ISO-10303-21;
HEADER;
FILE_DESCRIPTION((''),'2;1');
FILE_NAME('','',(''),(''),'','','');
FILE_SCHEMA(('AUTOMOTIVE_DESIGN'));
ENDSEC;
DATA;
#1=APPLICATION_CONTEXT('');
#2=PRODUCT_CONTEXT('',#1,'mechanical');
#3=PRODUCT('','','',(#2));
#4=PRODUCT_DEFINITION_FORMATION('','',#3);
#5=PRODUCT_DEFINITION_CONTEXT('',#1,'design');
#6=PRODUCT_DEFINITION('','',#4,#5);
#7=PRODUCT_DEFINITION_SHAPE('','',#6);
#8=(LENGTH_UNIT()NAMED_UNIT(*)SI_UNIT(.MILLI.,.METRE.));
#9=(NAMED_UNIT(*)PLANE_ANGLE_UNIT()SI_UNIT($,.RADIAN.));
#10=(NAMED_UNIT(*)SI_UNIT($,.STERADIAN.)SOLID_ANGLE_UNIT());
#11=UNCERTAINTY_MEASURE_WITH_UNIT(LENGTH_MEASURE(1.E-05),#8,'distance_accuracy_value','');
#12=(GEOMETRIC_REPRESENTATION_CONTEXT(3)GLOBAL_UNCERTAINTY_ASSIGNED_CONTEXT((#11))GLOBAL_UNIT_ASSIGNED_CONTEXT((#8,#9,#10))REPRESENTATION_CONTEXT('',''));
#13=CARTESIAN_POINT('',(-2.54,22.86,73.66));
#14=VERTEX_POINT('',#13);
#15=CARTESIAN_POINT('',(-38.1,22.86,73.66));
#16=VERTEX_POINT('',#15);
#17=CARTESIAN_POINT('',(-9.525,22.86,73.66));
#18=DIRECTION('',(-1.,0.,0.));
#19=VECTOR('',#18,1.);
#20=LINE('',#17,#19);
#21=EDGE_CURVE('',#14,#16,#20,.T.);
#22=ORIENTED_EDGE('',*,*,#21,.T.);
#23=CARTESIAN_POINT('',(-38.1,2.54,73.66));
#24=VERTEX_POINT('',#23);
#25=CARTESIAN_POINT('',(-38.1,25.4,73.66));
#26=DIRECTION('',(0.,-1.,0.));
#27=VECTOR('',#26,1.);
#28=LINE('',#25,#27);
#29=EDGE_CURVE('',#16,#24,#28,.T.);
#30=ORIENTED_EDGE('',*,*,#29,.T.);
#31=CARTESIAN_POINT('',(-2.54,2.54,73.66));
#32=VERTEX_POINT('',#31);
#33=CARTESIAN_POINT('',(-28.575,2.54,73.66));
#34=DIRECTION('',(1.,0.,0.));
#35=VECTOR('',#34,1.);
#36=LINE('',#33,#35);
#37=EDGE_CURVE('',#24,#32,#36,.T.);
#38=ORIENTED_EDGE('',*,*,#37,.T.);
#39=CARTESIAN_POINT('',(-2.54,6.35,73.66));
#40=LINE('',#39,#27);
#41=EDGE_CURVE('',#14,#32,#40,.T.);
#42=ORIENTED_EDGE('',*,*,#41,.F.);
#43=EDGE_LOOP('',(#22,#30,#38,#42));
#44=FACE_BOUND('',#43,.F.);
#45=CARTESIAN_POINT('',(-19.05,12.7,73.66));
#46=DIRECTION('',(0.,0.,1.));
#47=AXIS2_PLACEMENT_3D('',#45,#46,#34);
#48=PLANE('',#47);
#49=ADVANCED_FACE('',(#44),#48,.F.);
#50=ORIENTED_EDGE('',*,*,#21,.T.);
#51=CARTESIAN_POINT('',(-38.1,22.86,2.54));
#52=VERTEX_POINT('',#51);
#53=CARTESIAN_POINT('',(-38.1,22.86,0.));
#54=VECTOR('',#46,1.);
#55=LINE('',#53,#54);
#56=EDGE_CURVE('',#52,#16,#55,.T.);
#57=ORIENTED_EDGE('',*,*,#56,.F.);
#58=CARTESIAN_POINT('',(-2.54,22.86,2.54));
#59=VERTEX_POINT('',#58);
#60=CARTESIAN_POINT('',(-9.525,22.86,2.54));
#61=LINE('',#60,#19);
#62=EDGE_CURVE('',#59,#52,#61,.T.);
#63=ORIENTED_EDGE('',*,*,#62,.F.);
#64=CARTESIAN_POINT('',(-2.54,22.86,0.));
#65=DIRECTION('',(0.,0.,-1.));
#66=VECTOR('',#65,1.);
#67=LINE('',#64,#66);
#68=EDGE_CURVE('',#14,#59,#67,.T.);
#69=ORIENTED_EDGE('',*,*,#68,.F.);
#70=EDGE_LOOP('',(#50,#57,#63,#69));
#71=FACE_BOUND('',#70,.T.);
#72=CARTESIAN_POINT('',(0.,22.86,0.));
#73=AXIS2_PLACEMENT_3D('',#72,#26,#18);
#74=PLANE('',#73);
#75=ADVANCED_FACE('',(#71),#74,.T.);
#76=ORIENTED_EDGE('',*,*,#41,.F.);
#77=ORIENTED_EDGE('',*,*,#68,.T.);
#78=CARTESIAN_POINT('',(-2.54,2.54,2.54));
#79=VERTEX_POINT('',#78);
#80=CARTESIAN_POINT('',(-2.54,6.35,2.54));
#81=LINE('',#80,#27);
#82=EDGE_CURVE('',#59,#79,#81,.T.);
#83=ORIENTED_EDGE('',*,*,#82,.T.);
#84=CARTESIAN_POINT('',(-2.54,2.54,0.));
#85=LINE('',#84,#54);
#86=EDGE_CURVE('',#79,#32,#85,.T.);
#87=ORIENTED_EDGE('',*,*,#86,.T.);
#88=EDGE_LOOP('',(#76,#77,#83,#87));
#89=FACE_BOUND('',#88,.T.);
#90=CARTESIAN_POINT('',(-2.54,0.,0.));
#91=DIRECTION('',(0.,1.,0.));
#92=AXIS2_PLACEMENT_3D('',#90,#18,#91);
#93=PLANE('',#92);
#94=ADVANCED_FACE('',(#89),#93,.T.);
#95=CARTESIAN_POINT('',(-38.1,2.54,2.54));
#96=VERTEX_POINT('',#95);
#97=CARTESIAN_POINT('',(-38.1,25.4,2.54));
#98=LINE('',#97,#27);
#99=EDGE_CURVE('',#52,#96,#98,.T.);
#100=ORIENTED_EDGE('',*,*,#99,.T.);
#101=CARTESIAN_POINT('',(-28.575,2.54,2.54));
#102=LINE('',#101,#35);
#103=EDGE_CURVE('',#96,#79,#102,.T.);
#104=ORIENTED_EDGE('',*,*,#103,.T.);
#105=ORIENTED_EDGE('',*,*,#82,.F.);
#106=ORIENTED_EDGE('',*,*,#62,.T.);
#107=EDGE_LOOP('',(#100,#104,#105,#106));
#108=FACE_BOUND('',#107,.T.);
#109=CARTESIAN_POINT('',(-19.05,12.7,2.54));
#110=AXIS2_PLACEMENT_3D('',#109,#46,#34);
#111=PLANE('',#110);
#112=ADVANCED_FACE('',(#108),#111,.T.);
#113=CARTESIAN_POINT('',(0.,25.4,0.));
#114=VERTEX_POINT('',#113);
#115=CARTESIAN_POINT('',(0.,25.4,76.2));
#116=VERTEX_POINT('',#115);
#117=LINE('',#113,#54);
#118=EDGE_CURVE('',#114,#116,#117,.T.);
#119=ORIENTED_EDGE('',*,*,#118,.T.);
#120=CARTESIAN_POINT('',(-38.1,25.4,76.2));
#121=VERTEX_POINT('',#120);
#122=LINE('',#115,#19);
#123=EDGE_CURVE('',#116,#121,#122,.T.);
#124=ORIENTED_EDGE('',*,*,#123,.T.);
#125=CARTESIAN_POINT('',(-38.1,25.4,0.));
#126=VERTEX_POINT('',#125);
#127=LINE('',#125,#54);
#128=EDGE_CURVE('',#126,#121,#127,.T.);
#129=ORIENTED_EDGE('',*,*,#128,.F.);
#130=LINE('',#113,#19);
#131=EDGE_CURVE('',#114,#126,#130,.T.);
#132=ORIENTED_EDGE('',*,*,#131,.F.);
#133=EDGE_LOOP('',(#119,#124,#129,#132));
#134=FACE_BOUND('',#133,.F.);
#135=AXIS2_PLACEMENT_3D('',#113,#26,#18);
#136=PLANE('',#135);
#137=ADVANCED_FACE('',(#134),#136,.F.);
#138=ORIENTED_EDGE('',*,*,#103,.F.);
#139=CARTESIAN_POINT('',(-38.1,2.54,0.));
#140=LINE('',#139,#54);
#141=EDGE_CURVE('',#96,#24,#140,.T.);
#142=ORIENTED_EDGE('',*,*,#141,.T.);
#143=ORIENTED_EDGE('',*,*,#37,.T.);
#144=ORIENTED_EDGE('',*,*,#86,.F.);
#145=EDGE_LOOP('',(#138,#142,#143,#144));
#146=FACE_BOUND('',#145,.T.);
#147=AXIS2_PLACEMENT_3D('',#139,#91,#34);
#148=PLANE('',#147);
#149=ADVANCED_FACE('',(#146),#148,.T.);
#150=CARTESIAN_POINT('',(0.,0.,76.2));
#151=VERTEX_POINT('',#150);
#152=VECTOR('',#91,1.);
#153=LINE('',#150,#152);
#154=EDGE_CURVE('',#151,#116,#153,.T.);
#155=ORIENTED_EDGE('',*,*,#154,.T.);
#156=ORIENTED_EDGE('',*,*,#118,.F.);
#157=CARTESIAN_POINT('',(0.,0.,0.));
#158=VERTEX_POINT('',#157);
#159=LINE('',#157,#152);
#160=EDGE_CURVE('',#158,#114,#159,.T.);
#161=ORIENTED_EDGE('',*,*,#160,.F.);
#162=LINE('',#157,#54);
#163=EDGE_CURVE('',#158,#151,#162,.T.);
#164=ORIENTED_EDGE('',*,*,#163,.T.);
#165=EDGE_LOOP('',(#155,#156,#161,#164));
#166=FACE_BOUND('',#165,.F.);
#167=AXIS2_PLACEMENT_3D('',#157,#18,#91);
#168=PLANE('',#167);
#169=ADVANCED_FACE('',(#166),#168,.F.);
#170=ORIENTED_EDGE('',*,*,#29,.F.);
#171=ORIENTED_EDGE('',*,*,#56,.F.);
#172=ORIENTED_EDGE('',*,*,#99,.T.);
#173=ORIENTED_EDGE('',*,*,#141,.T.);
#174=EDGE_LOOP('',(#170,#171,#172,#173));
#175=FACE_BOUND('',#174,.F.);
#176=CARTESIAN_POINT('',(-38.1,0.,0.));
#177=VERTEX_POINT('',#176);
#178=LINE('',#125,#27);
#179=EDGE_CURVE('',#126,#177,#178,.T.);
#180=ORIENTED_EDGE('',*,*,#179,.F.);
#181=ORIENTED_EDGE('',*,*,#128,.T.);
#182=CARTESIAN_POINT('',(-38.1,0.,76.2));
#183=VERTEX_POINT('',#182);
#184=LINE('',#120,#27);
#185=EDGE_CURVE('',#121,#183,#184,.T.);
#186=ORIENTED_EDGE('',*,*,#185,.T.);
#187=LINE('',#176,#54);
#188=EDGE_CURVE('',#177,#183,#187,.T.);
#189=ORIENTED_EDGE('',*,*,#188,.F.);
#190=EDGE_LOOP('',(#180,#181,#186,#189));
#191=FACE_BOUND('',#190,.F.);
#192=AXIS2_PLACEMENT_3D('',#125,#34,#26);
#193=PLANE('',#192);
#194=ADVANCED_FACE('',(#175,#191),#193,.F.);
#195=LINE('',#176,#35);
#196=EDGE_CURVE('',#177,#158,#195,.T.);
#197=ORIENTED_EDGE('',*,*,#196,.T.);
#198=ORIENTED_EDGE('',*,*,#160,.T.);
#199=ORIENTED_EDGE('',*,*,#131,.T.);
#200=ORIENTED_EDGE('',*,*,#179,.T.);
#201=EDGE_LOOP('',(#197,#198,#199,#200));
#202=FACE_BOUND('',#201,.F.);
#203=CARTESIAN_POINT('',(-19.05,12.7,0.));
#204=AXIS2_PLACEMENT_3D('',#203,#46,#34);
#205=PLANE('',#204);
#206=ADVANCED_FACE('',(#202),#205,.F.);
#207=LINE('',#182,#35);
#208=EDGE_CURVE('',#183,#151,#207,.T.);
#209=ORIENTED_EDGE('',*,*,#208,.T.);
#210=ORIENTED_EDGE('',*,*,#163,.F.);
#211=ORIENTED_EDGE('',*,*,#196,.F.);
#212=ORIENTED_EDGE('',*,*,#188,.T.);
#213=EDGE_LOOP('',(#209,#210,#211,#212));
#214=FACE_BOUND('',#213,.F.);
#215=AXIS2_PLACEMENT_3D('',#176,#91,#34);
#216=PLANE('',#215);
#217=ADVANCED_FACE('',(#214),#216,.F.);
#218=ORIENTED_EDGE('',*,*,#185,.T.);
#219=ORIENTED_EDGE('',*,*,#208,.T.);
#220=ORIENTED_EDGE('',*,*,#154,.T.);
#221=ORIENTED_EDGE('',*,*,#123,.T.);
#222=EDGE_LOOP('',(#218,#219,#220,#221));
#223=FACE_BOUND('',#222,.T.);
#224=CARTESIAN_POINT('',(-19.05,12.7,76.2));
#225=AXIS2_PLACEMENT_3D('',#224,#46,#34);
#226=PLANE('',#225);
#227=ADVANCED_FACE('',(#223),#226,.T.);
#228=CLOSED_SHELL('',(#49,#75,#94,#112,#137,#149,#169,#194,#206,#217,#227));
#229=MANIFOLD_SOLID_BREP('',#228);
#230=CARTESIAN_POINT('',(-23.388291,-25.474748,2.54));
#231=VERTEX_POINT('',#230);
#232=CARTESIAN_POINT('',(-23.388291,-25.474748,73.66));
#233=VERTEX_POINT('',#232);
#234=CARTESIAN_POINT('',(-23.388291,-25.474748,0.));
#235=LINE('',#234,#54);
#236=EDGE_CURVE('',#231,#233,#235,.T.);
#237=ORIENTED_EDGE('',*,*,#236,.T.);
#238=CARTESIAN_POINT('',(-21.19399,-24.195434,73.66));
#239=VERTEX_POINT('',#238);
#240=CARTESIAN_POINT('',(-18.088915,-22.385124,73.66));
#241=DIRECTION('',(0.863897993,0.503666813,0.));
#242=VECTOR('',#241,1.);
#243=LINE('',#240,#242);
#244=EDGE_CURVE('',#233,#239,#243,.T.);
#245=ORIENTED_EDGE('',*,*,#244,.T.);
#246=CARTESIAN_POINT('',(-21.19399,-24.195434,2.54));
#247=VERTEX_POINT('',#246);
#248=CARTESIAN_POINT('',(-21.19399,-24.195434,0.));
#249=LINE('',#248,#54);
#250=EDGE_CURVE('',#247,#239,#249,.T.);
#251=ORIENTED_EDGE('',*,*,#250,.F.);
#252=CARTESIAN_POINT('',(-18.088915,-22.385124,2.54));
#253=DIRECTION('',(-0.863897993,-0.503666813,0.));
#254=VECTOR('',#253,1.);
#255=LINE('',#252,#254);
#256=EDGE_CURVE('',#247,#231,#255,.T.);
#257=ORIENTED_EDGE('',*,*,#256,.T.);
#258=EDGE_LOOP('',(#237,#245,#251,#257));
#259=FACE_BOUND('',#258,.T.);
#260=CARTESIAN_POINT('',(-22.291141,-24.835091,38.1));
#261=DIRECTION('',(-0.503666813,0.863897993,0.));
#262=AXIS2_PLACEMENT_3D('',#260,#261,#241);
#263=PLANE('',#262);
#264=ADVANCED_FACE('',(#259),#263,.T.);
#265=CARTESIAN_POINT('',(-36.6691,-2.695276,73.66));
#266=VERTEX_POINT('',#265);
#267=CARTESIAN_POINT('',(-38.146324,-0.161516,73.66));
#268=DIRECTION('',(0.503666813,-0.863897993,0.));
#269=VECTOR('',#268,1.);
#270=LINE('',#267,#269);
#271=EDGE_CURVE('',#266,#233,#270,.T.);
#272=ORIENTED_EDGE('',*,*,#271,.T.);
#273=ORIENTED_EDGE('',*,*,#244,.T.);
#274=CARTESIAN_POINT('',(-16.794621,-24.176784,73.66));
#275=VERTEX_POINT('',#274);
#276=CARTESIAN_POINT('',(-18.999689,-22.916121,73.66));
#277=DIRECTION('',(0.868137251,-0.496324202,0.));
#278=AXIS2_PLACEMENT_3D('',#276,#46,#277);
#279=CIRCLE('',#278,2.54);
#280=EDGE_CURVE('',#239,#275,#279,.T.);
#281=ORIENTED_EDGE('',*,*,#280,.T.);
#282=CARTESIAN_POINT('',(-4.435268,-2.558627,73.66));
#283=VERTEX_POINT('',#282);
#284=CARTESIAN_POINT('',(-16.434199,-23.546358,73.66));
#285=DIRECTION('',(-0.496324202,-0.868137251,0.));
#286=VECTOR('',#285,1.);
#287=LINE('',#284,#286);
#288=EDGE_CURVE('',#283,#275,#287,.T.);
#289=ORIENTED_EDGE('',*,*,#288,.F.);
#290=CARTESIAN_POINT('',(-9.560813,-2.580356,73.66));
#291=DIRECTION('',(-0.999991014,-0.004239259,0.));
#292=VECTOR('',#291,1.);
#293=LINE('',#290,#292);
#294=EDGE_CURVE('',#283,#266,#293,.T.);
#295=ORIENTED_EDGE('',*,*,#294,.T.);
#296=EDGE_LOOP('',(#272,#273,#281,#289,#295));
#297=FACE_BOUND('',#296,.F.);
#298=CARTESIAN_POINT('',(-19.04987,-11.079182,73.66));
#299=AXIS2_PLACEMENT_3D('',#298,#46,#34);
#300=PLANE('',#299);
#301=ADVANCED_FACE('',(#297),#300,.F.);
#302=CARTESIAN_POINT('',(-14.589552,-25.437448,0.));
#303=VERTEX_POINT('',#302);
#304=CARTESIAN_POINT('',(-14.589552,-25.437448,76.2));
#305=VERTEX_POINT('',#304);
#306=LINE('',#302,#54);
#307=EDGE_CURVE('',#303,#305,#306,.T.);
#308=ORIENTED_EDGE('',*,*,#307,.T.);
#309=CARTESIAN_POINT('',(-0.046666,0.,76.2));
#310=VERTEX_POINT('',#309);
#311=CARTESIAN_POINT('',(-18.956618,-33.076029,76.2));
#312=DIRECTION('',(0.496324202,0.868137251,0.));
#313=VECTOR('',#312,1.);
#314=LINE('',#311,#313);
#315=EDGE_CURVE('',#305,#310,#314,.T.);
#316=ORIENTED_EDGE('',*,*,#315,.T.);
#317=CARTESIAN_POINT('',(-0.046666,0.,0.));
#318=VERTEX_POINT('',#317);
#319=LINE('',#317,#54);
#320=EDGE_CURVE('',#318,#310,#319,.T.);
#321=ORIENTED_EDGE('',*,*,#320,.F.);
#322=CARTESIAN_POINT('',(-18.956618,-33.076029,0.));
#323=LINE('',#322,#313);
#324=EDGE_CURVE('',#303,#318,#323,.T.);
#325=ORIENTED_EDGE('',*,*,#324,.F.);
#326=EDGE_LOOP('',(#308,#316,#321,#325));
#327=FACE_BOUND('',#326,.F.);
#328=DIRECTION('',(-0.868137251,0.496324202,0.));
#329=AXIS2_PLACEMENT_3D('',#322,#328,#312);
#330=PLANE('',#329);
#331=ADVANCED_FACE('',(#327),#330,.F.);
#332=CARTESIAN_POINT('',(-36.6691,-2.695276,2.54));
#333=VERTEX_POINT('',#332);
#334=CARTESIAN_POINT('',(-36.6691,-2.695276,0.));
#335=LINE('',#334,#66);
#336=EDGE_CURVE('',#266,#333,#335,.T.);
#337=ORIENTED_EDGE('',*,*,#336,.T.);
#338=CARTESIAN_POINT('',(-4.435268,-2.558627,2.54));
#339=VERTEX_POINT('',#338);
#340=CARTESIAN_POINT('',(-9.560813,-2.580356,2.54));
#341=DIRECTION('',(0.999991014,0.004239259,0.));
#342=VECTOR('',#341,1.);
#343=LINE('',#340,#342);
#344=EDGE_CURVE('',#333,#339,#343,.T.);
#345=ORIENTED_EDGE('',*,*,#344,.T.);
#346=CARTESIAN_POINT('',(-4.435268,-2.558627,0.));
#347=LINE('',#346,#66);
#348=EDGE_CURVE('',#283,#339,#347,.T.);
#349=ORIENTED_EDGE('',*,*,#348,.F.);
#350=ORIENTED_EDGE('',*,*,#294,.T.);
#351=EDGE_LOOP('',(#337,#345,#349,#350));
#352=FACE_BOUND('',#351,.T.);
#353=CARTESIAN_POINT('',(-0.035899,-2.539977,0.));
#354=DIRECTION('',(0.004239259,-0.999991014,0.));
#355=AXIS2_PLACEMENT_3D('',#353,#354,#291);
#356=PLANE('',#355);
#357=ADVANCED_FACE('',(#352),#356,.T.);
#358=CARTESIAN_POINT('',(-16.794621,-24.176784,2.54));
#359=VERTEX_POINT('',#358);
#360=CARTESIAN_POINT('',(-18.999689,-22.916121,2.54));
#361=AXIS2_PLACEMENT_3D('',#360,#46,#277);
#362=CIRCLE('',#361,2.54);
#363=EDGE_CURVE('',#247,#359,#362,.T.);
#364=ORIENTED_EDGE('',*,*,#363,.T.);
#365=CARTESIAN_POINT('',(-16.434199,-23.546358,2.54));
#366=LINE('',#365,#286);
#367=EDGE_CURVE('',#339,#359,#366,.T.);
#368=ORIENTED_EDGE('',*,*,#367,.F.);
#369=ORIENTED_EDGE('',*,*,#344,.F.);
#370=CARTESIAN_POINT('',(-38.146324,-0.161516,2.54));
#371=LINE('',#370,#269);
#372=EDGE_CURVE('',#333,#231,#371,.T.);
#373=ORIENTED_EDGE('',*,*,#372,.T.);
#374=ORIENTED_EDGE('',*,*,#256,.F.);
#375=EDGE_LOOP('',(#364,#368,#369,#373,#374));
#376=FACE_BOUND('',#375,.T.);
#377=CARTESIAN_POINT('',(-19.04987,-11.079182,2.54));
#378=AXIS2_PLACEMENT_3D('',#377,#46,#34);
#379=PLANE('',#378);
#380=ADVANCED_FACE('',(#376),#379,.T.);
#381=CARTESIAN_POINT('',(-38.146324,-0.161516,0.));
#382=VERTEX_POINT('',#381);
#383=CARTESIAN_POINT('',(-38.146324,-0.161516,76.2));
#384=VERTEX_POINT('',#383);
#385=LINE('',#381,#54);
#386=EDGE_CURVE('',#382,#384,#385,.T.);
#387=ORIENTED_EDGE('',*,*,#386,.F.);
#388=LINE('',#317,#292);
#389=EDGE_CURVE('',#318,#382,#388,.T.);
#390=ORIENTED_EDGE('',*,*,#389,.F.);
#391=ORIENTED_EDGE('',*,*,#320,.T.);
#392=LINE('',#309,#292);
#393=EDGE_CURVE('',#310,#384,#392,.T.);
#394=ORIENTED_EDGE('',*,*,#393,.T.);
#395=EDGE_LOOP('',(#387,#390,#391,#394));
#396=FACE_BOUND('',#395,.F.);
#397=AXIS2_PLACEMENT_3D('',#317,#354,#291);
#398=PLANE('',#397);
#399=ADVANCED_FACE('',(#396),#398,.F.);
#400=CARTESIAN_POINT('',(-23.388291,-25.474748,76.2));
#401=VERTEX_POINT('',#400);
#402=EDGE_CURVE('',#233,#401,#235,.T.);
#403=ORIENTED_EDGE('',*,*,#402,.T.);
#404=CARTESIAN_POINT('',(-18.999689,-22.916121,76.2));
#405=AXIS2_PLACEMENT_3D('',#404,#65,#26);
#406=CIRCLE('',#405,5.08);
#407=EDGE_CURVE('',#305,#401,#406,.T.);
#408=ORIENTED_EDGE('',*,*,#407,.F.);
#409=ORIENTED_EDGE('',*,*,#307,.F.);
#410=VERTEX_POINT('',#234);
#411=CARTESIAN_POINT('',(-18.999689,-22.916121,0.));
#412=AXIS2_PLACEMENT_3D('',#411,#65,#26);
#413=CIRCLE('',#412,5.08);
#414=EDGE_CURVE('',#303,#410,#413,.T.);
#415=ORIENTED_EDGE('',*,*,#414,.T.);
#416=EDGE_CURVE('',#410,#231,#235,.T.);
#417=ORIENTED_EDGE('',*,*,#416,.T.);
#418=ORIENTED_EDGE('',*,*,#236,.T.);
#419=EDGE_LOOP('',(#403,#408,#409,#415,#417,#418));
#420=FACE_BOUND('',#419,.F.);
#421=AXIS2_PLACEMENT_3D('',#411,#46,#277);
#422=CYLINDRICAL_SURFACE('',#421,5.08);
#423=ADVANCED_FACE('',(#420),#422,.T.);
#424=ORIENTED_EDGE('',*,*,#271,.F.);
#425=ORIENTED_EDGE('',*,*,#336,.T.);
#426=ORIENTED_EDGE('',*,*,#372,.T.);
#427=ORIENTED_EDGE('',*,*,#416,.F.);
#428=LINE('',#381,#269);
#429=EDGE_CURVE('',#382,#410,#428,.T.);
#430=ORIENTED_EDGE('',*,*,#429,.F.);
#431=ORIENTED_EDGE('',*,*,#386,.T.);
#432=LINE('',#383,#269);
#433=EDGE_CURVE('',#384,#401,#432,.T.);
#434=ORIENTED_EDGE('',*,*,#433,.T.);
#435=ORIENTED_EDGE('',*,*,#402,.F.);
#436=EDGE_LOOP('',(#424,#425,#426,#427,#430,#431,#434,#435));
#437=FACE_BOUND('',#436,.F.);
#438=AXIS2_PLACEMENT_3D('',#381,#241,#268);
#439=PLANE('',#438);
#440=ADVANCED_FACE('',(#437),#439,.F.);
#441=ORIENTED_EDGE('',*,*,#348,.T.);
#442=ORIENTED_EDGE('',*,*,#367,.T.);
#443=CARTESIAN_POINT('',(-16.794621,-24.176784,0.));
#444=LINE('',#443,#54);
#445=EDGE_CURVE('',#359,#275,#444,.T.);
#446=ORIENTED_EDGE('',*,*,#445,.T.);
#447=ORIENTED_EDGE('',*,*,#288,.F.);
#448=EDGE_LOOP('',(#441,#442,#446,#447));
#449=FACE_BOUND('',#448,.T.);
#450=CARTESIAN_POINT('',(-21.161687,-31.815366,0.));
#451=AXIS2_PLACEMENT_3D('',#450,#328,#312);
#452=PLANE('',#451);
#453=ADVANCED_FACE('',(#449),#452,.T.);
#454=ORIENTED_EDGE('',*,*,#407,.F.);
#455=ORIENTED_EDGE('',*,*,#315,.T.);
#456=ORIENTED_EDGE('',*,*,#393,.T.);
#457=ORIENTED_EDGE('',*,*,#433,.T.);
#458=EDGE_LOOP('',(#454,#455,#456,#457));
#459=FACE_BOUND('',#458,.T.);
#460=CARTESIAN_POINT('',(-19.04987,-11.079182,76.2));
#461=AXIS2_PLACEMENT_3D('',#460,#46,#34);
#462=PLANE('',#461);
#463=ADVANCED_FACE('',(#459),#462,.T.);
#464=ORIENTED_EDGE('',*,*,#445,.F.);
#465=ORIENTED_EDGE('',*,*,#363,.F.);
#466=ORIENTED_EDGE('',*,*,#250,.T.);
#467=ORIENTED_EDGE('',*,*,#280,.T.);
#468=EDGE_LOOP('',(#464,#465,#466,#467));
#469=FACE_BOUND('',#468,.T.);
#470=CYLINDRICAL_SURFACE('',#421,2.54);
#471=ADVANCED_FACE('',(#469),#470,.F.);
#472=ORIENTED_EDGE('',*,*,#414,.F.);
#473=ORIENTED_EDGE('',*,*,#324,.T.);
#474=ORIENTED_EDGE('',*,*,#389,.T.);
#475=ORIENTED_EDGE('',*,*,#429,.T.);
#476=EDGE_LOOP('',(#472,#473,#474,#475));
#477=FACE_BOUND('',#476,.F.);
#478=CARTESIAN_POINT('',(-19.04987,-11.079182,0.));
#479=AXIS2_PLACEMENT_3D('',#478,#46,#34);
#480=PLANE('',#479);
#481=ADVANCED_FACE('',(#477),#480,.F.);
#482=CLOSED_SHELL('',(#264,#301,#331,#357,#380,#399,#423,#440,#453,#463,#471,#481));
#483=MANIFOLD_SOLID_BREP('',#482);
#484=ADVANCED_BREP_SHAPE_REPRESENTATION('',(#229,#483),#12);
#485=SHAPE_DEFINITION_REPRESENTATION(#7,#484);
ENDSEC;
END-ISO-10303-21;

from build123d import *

# Parameters (mm, degrees)
F1_DEPTH = 76.2
F2_R     = 5.08
F3_T     = -2.54
F3_2_T   = 2.54


# Not quite as in the source:
# - a shell that OpenCascade refuses in one call is made with other operations: the cavity is built on its own and cut out


with BuildPart() as f1:
    # F0 (on Top) → F1 (new body)
    with BuildSketch(Plane.XY):
        Polygon((-18.9566183835, -33.0760292709), (-0.0466663034, 0), (-38.1463239484, -0.1615157497), align=None)
    extrude(amount=F1_DEPTH)

    # F2
    f2_edges = [f1.edges().sort_by_distance(p)[0] for p in [
        (-18.956618, -33.076029, 38.1),
    ]]
    fillet(f2_edges, radius=F2_R)

    # F3#2: shell of thickness 2.54, made by hand


with BuildPart() as f1b:
    # F0 (on Top) → F1, piece 2 (new body)
    with BuildSketch(Plane.XY):
        Polygon((-0.0466663034, 0), (0, 0), (0, 25.4), (-38.1, 25.4), (-38.1, 0), align=None)
    extrude(amount=F1_DEPTH)

    # F3
    f3_openings = [f1b.faces().sort_by_distance(p)[0] for p in [
        (-38.1, 12.7, 38.1),
    ]]
    offset(amount=F3_T, openings=f3_openings)


with BuildPart() as f3_2_core1:
    # F3_2_t2: copy of F1
    add(f1.part)

    # the walls: a layer under each face that stays
    f3_2_faces = [f3_2_core1.faces().sort_by_distance(p)[0] for p in [
        (-19.0964951259, -13.9980602828, 0),
        (-18.9781538168, -27.9960749182, 38.1),
        (-19.0964951259, -0.0807578749, 38.1),
        (-19.0964951259, -13.9980602828, 76.2),
        (-7.3181091587, -12.7187237548, 38.1),
    ]]
    thicken(f3_2_faces, amount=-F3_2_T, mode=Mode.SUBTRACT)


with BuildPart() as f1_1:
    add(f1.part)

    # what is left inside the walls is the cavity
    f3_2_cavity = [f3_2_core1.part.solids().sort_by_distance(p)[0] for p in [
        (-20.552076, -2.652352, 49.953333),
    ]]
    add(f3_2_cavity, mode=Mode.SUBTRACT)


solid = Compound([f1b.part, f1_1.part])
